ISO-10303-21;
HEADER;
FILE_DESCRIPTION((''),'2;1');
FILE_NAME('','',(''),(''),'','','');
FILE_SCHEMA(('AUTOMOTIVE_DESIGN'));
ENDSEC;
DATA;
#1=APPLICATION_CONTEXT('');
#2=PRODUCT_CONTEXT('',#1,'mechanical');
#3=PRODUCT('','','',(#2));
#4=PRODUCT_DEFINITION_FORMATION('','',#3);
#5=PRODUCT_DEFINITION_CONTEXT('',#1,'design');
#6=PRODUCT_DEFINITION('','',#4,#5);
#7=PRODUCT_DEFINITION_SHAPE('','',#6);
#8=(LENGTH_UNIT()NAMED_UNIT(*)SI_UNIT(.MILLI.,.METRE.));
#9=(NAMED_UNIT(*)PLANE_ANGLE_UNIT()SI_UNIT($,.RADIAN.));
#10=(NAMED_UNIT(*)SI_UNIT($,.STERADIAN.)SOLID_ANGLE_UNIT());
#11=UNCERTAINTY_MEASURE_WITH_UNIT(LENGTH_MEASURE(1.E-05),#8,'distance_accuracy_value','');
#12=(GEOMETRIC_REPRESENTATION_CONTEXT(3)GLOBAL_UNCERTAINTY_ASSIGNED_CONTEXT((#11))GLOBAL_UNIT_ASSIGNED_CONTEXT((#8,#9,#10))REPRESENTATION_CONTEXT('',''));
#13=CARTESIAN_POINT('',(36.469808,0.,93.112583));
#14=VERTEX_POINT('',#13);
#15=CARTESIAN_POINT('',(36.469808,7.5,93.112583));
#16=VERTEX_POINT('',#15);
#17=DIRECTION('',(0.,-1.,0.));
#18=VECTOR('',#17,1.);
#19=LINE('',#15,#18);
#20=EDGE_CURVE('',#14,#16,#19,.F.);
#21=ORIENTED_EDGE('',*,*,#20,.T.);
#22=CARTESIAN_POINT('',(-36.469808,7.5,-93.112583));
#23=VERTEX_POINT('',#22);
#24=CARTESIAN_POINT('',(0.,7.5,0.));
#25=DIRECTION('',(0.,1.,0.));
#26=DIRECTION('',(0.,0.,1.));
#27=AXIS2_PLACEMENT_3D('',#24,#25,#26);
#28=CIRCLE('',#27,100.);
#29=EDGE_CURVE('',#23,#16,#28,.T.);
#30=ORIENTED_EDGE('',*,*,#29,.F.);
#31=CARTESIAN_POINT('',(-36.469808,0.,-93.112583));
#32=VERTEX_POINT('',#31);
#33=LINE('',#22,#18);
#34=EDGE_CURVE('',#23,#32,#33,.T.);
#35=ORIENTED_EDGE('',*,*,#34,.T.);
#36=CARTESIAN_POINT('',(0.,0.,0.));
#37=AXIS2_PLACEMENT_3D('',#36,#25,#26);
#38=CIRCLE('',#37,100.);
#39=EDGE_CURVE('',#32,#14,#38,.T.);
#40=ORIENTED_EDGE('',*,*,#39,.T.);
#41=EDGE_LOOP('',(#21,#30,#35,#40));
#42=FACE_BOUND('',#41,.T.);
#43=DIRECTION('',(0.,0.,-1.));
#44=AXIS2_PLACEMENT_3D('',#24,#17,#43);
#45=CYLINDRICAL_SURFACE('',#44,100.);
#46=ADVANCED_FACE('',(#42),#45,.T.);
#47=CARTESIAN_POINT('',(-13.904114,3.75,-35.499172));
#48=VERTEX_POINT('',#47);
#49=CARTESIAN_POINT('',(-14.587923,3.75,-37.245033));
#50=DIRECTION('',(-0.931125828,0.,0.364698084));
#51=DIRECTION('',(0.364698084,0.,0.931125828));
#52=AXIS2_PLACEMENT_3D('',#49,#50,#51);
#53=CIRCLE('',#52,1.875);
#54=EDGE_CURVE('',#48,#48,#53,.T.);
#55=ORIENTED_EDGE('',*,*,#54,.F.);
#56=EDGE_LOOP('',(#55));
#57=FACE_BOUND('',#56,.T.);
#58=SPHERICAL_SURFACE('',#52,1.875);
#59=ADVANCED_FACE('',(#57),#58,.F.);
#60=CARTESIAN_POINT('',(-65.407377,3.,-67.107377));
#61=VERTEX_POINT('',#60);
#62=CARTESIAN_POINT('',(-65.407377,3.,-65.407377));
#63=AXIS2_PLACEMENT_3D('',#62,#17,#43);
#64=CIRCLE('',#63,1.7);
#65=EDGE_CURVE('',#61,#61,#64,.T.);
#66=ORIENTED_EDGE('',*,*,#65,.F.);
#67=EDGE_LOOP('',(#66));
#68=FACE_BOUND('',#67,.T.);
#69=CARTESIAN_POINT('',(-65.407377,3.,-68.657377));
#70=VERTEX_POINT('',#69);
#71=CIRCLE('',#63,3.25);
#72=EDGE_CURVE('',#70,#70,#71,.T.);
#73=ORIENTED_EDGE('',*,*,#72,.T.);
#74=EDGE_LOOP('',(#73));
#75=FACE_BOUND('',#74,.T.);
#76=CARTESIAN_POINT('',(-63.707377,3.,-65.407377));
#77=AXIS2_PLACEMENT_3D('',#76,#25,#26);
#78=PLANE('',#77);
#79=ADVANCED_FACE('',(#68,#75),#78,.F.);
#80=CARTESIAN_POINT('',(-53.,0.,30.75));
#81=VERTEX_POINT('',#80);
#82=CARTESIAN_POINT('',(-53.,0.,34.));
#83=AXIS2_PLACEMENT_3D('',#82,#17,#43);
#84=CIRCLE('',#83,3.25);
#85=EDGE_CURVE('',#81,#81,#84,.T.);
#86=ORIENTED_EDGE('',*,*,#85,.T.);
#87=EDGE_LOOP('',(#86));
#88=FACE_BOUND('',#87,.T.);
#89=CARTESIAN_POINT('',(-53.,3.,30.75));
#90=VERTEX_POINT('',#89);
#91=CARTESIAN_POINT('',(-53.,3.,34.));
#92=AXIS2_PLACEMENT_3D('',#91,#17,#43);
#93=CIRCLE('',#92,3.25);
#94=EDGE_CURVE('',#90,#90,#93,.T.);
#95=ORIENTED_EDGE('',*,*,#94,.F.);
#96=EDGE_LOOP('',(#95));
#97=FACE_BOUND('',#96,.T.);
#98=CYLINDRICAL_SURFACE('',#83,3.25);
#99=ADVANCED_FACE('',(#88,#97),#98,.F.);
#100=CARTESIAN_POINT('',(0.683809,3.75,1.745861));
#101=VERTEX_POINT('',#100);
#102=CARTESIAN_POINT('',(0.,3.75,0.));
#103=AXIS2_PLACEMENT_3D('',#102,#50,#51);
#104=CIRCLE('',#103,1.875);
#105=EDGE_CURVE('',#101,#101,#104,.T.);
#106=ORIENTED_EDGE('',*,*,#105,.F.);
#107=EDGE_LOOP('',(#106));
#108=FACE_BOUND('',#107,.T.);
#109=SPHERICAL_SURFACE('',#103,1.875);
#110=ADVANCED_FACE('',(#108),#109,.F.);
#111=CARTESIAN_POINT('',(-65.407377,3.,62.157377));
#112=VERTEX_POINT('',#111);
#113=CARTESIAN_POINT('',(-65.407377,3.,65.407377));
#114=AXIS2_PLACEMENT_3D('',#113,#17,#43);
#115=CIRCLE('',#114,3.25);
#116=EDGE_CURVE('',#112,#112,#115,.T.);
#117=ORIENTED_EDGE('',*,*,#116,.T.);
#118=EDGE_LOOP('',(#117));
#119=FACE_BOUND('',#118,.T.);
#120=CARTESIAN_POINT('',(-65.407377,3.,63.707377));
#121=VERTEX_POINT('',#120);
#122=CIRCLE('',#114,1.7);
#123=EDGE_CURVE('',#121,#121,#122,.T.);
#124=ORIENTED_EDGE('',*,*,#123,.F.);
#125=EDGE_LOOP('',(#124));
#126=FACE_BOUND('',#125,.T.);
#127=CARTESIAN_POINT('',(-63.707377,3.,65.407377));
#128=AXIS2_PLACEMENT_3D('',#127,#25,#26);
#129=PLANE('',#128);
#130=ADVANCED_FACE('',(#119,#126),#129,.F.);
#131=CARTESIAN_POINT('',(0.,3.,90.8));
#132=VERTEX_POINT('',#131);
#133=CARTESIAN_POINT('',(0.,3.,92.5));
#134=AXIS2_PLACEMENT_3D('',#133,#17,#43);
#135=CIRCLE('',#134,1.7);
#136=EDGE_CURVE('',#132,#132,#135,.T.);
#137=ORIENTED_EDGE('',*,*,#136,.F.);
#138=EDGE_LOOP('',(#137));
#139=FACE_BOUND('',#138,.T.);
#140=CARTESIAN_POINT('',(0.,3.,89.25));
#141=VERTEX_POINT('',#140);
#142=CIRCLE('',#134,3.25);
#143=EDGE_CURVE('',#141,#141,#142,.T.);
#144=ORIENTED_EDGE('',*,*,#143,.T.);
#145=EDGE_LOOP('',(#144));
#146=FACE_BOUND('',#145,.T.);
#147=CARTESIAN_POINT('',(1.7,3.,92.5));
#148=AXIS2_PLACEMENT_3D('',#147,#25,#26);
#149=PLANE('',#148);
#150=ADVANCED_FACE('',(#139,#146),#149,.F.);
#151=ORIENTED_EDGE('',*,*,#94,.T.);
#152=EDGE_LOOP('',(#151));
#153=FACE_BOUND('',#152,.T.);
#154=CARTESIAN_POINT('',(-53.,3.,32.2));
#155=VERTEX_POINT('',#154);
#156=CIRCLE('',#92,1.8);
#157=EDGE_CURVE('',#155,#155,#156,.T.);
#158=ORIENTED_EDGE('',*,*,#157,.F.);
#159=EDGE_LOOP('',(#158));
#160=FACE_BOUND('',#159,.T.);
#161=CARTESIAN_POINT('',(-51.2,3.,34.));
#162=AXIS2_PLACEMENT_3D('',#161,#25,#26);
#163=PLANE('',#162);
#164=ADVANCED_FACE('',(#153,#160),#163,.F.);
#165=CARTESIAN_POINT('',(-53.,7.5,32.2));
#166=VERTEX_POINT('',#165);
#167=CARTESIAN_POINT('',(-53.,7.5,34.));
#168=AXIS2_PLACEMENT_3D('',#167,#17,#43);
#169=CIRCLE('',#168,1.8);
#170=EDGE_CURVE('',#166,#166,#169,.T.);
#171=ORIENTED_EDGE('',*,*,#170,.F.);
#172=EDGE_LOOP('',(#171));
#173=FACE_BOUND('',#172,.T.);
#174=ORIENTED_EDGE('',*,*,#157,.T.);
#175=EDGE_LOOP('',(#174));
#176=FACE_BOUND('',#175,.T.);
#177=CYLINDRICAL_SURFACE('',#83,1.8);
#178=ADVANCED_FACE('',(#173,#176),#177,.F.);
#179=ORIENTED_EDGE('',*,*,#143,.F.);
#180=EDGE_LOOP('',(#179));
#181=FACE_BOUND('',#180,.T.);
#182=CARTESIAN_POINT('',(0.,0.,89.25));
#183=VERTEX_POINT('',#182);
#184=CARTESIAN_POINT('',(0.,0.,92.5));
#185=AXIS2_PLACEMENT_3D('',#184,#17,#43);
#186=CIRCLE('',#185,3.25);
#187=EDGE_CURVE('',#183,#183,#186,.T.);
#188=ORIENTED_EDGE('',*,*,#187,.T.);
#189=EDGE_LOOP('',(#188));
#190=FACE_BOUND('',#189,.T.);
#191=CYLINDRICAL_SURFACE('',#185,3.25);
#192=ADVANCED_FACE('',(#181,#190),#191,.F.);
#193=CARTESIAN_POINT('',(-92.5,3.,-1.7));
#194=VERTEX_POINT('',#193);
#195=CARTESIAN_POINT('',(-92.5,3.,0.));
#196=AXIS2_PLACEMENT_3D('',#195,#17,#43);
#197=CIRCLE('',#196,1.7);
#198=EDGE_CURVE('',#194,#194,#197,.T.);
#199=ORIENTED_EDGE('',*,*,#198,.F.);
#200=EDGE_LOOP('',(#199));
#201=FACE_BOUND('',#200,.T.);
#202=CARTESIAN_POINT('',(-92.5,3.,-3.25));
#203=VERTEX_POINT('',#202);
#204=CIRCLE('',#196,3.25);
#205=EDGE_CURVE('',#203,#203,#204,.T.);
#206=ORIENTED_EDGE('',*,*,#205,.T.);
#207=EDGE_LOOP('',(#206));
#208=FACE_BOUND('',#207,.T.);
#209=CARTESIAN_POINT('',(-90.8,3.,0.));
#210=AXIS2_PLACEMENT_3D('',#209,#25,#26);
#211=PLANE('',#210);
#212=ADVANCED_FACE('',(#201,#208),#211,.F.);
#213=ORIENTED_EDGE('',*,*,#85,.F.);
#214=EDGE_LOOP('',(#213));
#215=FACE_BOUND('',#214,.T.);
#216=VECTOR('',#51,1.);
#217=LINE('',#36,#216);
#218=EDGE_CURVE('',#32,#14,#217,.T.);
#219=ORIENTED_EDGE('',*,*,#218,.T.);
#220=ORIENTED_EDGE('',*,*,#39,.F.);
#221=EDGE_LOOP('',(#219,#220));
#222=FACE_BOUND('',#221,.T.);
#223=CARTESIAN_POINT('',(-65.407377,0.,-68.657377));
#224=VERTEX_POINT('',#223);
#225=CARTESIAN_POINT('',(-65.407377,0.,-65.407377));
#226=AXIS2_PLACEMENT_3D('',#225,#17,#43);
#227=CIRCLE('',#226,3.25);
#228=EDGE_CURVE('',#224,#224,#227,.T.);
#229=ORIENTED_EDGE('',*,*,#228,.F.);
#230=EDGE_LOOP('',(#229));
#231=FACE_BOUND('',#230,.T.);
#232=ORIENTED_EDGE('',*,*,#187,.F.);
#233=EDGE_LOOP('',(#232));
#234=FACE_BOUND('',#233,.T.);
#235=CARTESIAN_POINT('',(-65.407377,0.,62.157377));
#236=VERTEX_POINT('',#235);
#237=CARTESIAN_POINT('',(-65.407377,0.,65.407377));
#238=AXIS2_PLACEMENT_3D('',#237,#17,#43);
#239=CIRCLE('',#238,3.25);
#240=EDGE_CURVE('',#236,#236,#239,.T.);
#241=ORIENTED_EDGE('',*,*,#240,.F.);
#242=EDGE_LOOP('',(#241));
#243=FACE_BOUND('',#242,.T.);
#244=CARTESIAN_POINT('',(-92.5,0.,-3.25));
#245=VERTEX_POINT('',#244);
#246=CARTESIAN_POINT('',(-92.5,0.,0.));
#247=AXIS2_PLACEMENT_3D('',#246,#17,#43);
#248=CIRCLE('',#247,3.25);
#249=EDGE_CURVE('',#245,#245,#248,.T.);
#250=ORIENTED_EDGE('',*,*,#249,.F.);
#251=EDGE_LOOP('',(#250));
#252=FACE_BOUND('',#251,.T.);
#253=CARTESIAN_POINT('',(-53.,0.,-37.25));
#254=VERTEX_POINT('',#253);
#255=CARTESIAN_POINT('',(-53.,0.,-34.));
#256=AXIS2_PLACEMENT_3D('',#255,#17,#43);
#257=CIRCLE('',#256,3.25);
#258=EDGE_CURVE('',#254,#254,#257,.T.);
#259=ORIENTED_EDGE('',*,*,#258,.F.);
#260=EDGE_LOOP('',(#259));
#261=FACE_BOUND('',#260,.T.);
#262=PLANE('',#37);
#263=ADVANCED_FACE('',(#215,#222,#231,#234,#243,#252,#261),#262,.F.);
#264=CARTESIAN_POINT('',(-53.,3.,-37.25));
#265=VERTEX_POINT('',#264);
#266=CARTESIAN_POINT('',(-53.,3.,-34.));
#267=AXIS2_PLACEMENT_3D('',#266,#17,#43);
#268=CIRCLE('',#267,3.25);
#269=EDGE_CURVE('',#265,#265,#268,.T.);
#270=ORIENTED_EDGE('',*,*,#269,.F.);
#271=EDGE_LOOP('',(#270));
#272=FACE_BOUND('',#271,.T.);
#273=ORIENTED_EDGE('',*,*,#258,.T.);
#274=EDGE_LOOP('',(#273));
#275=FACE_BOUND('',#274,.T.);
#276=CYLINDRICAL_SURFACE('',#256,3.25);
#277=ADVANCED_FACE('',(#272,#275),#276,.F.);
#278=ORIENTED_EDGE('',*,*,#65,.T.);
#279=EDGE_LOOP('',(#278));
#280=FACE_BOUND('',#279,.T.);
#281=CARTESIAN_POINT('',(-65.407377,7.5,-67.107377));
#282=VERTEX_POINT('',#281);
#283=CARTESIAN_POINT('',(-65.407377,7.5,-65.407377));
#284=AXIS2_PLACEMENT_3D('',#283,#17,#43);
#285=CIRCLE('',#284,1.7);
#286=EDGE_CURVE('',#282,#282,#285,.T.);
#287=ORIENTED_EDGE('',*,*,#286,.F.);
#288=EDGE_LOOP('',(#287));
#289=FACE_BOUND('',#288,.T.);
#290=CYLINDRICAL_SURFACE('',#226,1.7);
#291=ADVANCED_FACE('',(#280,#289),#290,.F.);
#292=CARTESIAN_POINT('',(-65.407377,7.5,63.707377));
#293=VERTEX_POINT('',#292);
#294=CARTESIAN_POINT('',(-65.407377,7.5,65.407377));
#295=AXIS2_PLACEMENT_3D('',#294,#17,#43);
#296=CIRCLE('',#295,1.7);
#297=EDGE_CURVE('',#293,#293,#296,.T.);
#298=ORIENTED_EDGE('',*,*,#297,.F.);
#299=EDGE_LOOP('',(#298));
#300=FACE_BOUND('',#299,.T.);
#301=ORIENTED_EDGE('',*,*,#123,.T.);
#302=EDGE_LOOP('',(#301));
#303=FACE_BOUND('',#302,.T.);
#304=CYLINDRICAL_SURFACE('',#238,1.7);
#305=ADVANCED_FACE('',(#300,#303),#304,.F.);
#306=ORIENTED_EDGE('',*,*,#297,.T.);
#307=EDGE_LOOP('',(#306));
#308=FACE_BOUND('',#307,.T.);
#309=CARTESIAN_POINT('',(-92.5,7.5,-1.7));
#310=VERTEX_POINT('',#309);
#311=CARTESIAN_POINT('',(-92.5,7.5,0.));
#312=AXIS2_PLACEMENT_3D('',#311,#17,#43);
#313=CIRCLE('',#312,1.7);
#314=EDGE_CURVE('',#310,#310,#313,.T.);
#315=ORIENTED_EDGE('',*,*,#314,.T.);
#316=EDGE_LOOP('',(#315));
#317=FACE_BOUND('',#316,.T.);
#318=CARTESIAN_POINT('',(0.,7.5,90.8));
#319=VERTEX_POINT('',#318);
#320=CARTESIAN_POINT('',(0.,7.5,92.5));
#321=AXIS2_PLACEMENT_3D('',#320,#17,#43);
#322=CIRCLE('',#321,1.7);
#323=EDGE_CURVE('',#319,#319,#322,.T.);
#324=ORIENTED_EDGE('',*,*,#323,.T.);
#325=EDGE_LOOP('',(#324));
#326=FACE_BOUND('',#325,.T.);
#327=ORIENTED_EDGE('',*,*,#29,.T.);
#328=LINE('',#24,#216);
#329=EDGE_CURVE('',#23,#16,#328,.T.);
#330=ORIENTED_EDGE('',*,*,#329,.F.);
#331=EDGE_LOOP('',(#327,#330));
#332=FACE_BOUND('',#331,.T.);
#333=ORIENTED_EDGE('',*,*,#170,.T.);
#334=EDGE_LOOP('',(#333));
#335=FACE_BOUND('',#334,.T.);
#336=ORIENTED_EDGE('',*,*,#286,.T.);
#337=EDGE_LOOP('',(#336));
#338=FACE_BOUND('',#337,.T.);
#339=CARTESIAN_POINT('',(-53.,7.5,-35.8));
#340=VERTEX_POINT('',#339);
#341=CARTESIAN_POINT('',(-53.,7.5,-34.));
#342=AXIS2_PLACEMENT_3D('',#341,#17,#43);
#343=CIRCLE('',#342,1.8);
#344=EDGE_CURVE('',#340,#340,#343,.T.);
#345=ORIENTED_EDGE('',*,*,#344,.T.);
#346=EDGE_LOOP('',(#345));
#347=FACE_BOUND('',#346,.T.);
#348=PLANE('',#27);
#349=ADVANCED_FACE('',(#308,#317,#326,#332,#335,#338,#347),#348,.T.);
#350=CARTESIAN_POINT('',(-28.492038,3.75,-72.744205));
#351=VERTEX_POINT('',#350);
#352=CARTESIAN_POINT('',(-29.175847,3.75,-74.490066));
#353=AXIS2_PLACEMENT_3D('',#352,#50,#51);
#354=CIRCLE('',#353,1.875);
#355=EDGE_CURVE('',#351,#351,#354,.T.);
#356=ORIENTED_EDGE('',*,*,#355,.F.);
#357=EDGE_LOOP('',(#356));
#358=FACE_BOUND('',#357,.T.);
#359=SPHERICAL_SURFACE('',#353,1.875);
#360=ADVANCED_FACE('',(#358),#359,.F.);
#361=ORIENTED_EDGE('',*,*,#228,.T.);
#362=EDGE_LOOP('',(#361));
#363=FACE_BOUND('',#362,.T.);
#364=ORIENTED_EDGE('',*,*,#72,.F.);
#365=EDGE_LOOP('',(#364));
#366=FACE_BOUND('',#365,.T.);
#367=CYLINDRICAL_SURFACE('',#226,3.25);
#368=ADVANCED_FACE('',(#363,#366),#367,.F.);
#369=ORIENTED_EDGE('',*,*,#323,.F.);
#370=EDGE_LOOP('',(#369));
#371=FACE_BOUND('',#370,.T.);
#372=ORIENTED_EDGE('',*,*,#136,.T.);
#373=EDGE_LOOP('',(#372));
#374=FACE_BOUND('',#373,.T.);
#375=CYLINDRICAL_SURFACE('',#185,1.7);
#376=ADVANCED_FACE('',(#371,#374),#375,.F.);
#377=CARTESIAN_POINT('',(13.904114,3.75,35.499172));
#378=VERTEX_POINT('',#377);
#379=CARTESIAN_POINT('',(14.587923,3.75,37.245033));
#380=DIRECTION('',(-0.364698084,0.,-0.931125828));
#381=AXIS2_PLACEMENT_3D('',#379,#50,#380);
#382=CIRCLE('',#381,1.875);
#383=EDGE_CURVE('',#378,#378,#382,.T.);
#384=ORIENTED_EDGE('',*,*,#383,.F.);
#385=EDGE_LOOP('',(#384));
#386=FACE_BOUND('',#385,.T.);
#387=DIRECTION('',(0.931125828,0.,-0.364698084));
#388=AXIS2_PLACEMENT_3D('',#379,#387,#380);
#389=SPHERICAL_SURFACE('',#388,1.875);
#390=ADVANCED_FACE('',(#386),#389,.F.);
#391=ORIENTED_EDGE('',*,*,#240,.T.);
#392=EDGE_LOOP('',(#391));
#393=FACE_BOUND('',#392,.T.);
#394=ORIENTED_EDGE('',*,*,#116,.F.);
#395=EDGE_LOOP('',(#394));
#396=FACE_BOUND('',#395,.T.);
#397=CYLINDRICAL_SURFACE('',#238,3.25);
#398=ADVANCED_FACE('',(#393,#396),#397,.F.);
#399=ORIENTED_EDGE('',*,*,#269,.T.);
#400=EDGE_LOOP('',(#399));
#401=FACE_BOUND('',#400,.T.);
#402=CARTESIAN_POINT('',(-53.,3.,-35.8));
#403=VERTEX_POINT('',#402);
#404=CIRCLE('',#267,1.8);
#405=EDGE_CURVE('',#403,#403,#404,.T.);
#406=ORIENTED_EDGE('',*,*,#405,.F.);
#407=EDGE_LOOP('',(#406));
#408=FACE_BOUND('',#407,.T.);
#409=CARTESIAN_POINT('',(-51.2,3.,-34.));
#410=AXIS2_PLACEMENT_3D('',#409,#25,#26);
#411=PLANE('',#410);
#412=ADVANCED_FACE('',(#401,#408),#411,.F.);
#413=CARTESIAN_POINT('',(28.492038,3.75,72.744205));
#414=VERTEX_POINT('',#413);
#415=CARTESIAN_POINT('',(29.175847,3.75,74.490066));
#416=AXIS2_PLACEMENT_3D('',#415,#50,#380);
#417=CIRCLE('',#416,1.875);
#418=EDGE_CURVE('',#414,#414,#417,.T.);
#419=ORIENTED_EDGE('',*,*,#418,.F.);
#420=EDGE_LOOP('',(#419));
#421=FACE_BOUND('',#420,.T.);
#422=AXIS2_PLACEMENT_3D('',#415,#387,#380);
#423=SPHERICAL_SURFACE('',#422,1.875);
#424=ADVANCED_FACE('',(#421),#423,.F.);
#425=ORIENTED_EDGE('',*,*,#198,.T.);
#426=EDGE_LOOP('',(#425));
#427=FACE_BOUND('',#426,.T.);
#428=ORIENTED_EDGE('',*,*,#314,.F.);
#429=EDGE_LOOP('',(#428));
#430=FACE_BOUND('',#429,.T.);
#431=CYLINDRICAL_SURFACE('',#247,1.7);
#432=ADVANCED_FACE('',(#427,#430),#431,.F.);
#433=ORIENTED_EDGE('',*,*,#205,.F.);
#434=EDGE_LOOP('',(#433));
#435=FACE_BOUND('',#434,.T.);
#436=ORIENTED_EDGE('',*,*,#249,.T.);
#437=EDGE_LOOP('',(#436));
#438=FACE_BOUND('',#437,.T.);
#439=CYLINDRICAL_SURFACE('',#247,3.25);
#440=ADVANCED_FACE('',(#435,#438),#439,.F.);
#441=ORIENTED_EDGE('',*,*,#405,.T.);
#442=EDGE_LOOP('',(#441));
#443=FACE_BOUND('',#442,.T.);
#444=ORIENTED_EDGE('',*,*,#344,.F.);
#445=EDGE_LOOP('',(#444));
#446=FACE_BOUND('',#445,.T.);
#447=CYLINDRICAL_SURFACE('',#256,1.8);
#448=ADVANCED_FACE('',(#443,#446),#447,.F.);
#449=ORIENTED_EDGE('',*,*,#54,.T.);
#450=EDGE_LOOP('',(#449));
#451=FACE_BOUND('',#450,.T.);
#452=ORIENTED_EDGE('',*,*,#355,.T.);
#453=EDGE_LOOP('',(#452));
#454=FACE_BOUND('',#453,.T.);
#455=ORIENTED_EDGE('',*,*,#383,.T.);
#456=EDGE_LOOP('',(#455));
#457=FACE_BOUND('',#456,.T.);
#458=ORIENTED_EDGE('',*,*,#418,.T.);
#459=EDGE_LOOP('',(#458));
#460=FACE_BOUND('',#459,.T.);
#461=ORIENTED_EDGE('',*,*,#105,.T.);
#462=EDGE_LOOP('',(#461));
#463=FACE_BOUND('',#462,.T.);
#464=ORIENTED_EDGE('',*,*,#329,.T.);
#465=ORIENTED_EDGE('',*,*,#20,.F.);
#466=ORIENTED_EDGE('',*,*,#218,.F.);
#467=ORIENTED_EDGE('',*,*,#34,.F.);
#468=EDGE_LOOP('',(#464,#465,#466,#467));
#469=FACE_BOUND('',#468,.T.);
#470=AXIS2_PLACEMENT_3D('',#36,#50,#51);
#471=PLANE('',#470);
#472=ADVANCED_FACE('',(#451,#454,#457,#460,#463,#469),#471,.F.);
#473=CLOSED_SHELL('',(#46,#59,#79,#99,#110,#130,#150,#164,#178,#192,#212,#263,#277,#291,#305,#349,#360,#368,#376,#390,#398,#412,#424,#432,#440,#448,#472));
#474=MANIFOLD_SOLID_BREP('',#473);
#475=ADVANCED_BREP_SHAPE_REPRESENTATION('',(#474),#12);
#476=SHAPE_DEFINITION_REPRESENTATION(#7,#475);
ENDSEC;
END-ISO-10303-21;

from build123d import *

# Parameters (mm, degrees)
SKETCH1_R                      = 100
BOSS_EXTRUDE1_DEPTH            = 7.5
CBORE_FOR_M3_SHCS1_D           = 3.4
CBORE_FOR_M3_SHCS1_DEPTH       = 7.5
CBORE_FOR_M3_SHCS1_CBORE_D     = 6.5
CBORE_FOR_M3_SHCS1_CBORE_DEPTH = 3
CBORE_FOR_M3_SHCS1_TIP         = 1.021463052
CBORE_FOR_M3_SHCS2_D           = 3.6
CBORE_FOR_M3_SHCS2_DEPTH       = 7.5
CBORE_FOR_M3_SHCS2_CBORE_D     = 6.5
CBORE_FOR_M3_SHCS2_CBORE_DEPTH = 3
CBORE_FOR_M3_SHCS2_TIP         = 1.081549114
SKETCH9_W                      = 276.839915284
SKETCH9_H                      = 86.454597136
CUT_EXTRUDE1_DEPTH             = 142.620090383
SKETCH10_R                     = 1.875
CUT_EXTRUDE2_DEPTH             = 1.875
FILLET1_R                      = 1.875


with BuildPart() as part:
    # Sketch1 → Boss-Extrude1 (new body)
    with BuildSketch(Plane(origin=(0, 0, 0), x_dir=(1, 0, 0), z_dir=(0, 1, 0))):
        with Locations(Location((0, 0, 0), (0, 0, 270))):
            Circle(SKETCH1_R)
    extrude(amount=BOSS_EXTRUDE1_DEPTH)

    # CBORE for M3 SHCS1
    with Locations(Plane(origin=(0, 0, 0), x_dir=(-1, 0, 0), z_dir=(0, -1, 0))):
        with Locations((0, -92.5), (-65.40737726, -65.40737726), (-92.5, 0), (-65.40737726, 65.40737726), (0, 92.5), (65.40737726, 65.40737726), (92.5, 0), (65.40737726, -65.40737726)):
            CounterBoreHole(CBORE_FOR_M3_SHCS1_D / 2, CBORE_FOR_M3_SHCS1_CBORE_D / 2, CBORE_FOR_M3_SHCS1_CBORE_DEPTH, depth=CBORE_FOR_M3_SHCS1_DEPTH)
            with Locations((0, 0, -(CBORE_FOR_M3_SHCS1_DEPTH + CBORE_FOR_M3_SHCS1_TIP / 2))):  # 118° drill point
                Cone(0, CBORE_FOR_M3_SHCS1_D / 2, CBORE_FOR_M3_SHCS1_TIP, mode=Mode.SUBTRACT)

    # CBORE for M3 SHCS2
    with Locations(Plane(origin=(0, 0, 0), x_dir=(-1, 0, 0), z_dir=(0, -1, 0))):
        with Locations((-53, 34), (53, 34), (53, -34), (-53, -34)):
            CounterBoreHole(CBORE_FOR_M3_SHCS2_D / 2, CBORE_FOR_M3_SHCS2_CBORE_D / 2, CBORE_FOR_M3_SHCS2_CBORE_DEPTH, depth=CBORE_FOR_M3_SHCS2_DEPTH)
            with Locations((0, 0, -(CBORE_FOR_M3_SHCS2_DEPTH + CBORE_FOR_M3_SHCS2_TIP / 2))):  # 118° drill point
                Cone(0, CBORE_FOR_M3_SHCS2_D / 2, CBORE_FOR_M3_SHCS2_TIP, mode=Mode.SUBTRACT)

    # Sketch9 → Cut-Extrude1 (cut, through all)
    with BuildSketch(Plane(origin=(0, 0, 0), x_dir=(0.3646980843717534, 0, 0.9311258278318637), z_dir=(-0.9311258278318637, 0, 0.3646980843717534))):
        with Locations((-1.022117504, -7.168579764)):
            Rectangle(SKETCH9_W, SKETCH9_H)
    extrude(amount=-CUT_EXTRUDE1_DEPTH, mode=Mode.SUBTRACT)

    # Sketch10 → Cut-Extrude2 (cut)
    with BuildSketch(Plane(origin=(0, 0, 0), x_dir=(0.3646980843717534, 0, 0.9311258278318637), z_dir=(-0.9311258278318637, 0, 0.3646980843717534))):
        with Locations(Location((0, 3.75, 0), (0, 0, 180))):
            Circle(SKETCH10_R)
        with Locations(Location((-40, 3.75, 0), (0, 0, 180))):
            Circle(SKETCH10_R)
        with Locations(Location((-80, 3.75, 0), (0, 0, 180))):
            Circle(SKETCH10_R)
        with Locations(Location((80, 3.75, 0), (0, 0, 180))):
            Circle(SKETCH10_R)
        with Locations(Location((40, 3.75, 0), (0, 0, 180))):
            Circle(SKETCH10_R)
    extrude(amount=CUT_EXTRUDE2_DEPTH, mode=Mode.SUBTRACT)

    # Fillet1
    fillet1_edges = [part.edges().sort_by_distance(p)[0] for p in [
        (-1.062052019, 3.75, 2.429669835),
        (-15.649975394, 3.75, -34.815363278),
        (-30.237898769, 3.75, -72.060396391),
        (28.113794731, 3.75, 76.919736062),
        (13.525871356, 3.75, 39.674702949),
    ]]
    fillet(fillet1_edges, radius=FILLET1_R - 0.0001)  # a hair under: the kernel refuses the full size


solid = part.part
